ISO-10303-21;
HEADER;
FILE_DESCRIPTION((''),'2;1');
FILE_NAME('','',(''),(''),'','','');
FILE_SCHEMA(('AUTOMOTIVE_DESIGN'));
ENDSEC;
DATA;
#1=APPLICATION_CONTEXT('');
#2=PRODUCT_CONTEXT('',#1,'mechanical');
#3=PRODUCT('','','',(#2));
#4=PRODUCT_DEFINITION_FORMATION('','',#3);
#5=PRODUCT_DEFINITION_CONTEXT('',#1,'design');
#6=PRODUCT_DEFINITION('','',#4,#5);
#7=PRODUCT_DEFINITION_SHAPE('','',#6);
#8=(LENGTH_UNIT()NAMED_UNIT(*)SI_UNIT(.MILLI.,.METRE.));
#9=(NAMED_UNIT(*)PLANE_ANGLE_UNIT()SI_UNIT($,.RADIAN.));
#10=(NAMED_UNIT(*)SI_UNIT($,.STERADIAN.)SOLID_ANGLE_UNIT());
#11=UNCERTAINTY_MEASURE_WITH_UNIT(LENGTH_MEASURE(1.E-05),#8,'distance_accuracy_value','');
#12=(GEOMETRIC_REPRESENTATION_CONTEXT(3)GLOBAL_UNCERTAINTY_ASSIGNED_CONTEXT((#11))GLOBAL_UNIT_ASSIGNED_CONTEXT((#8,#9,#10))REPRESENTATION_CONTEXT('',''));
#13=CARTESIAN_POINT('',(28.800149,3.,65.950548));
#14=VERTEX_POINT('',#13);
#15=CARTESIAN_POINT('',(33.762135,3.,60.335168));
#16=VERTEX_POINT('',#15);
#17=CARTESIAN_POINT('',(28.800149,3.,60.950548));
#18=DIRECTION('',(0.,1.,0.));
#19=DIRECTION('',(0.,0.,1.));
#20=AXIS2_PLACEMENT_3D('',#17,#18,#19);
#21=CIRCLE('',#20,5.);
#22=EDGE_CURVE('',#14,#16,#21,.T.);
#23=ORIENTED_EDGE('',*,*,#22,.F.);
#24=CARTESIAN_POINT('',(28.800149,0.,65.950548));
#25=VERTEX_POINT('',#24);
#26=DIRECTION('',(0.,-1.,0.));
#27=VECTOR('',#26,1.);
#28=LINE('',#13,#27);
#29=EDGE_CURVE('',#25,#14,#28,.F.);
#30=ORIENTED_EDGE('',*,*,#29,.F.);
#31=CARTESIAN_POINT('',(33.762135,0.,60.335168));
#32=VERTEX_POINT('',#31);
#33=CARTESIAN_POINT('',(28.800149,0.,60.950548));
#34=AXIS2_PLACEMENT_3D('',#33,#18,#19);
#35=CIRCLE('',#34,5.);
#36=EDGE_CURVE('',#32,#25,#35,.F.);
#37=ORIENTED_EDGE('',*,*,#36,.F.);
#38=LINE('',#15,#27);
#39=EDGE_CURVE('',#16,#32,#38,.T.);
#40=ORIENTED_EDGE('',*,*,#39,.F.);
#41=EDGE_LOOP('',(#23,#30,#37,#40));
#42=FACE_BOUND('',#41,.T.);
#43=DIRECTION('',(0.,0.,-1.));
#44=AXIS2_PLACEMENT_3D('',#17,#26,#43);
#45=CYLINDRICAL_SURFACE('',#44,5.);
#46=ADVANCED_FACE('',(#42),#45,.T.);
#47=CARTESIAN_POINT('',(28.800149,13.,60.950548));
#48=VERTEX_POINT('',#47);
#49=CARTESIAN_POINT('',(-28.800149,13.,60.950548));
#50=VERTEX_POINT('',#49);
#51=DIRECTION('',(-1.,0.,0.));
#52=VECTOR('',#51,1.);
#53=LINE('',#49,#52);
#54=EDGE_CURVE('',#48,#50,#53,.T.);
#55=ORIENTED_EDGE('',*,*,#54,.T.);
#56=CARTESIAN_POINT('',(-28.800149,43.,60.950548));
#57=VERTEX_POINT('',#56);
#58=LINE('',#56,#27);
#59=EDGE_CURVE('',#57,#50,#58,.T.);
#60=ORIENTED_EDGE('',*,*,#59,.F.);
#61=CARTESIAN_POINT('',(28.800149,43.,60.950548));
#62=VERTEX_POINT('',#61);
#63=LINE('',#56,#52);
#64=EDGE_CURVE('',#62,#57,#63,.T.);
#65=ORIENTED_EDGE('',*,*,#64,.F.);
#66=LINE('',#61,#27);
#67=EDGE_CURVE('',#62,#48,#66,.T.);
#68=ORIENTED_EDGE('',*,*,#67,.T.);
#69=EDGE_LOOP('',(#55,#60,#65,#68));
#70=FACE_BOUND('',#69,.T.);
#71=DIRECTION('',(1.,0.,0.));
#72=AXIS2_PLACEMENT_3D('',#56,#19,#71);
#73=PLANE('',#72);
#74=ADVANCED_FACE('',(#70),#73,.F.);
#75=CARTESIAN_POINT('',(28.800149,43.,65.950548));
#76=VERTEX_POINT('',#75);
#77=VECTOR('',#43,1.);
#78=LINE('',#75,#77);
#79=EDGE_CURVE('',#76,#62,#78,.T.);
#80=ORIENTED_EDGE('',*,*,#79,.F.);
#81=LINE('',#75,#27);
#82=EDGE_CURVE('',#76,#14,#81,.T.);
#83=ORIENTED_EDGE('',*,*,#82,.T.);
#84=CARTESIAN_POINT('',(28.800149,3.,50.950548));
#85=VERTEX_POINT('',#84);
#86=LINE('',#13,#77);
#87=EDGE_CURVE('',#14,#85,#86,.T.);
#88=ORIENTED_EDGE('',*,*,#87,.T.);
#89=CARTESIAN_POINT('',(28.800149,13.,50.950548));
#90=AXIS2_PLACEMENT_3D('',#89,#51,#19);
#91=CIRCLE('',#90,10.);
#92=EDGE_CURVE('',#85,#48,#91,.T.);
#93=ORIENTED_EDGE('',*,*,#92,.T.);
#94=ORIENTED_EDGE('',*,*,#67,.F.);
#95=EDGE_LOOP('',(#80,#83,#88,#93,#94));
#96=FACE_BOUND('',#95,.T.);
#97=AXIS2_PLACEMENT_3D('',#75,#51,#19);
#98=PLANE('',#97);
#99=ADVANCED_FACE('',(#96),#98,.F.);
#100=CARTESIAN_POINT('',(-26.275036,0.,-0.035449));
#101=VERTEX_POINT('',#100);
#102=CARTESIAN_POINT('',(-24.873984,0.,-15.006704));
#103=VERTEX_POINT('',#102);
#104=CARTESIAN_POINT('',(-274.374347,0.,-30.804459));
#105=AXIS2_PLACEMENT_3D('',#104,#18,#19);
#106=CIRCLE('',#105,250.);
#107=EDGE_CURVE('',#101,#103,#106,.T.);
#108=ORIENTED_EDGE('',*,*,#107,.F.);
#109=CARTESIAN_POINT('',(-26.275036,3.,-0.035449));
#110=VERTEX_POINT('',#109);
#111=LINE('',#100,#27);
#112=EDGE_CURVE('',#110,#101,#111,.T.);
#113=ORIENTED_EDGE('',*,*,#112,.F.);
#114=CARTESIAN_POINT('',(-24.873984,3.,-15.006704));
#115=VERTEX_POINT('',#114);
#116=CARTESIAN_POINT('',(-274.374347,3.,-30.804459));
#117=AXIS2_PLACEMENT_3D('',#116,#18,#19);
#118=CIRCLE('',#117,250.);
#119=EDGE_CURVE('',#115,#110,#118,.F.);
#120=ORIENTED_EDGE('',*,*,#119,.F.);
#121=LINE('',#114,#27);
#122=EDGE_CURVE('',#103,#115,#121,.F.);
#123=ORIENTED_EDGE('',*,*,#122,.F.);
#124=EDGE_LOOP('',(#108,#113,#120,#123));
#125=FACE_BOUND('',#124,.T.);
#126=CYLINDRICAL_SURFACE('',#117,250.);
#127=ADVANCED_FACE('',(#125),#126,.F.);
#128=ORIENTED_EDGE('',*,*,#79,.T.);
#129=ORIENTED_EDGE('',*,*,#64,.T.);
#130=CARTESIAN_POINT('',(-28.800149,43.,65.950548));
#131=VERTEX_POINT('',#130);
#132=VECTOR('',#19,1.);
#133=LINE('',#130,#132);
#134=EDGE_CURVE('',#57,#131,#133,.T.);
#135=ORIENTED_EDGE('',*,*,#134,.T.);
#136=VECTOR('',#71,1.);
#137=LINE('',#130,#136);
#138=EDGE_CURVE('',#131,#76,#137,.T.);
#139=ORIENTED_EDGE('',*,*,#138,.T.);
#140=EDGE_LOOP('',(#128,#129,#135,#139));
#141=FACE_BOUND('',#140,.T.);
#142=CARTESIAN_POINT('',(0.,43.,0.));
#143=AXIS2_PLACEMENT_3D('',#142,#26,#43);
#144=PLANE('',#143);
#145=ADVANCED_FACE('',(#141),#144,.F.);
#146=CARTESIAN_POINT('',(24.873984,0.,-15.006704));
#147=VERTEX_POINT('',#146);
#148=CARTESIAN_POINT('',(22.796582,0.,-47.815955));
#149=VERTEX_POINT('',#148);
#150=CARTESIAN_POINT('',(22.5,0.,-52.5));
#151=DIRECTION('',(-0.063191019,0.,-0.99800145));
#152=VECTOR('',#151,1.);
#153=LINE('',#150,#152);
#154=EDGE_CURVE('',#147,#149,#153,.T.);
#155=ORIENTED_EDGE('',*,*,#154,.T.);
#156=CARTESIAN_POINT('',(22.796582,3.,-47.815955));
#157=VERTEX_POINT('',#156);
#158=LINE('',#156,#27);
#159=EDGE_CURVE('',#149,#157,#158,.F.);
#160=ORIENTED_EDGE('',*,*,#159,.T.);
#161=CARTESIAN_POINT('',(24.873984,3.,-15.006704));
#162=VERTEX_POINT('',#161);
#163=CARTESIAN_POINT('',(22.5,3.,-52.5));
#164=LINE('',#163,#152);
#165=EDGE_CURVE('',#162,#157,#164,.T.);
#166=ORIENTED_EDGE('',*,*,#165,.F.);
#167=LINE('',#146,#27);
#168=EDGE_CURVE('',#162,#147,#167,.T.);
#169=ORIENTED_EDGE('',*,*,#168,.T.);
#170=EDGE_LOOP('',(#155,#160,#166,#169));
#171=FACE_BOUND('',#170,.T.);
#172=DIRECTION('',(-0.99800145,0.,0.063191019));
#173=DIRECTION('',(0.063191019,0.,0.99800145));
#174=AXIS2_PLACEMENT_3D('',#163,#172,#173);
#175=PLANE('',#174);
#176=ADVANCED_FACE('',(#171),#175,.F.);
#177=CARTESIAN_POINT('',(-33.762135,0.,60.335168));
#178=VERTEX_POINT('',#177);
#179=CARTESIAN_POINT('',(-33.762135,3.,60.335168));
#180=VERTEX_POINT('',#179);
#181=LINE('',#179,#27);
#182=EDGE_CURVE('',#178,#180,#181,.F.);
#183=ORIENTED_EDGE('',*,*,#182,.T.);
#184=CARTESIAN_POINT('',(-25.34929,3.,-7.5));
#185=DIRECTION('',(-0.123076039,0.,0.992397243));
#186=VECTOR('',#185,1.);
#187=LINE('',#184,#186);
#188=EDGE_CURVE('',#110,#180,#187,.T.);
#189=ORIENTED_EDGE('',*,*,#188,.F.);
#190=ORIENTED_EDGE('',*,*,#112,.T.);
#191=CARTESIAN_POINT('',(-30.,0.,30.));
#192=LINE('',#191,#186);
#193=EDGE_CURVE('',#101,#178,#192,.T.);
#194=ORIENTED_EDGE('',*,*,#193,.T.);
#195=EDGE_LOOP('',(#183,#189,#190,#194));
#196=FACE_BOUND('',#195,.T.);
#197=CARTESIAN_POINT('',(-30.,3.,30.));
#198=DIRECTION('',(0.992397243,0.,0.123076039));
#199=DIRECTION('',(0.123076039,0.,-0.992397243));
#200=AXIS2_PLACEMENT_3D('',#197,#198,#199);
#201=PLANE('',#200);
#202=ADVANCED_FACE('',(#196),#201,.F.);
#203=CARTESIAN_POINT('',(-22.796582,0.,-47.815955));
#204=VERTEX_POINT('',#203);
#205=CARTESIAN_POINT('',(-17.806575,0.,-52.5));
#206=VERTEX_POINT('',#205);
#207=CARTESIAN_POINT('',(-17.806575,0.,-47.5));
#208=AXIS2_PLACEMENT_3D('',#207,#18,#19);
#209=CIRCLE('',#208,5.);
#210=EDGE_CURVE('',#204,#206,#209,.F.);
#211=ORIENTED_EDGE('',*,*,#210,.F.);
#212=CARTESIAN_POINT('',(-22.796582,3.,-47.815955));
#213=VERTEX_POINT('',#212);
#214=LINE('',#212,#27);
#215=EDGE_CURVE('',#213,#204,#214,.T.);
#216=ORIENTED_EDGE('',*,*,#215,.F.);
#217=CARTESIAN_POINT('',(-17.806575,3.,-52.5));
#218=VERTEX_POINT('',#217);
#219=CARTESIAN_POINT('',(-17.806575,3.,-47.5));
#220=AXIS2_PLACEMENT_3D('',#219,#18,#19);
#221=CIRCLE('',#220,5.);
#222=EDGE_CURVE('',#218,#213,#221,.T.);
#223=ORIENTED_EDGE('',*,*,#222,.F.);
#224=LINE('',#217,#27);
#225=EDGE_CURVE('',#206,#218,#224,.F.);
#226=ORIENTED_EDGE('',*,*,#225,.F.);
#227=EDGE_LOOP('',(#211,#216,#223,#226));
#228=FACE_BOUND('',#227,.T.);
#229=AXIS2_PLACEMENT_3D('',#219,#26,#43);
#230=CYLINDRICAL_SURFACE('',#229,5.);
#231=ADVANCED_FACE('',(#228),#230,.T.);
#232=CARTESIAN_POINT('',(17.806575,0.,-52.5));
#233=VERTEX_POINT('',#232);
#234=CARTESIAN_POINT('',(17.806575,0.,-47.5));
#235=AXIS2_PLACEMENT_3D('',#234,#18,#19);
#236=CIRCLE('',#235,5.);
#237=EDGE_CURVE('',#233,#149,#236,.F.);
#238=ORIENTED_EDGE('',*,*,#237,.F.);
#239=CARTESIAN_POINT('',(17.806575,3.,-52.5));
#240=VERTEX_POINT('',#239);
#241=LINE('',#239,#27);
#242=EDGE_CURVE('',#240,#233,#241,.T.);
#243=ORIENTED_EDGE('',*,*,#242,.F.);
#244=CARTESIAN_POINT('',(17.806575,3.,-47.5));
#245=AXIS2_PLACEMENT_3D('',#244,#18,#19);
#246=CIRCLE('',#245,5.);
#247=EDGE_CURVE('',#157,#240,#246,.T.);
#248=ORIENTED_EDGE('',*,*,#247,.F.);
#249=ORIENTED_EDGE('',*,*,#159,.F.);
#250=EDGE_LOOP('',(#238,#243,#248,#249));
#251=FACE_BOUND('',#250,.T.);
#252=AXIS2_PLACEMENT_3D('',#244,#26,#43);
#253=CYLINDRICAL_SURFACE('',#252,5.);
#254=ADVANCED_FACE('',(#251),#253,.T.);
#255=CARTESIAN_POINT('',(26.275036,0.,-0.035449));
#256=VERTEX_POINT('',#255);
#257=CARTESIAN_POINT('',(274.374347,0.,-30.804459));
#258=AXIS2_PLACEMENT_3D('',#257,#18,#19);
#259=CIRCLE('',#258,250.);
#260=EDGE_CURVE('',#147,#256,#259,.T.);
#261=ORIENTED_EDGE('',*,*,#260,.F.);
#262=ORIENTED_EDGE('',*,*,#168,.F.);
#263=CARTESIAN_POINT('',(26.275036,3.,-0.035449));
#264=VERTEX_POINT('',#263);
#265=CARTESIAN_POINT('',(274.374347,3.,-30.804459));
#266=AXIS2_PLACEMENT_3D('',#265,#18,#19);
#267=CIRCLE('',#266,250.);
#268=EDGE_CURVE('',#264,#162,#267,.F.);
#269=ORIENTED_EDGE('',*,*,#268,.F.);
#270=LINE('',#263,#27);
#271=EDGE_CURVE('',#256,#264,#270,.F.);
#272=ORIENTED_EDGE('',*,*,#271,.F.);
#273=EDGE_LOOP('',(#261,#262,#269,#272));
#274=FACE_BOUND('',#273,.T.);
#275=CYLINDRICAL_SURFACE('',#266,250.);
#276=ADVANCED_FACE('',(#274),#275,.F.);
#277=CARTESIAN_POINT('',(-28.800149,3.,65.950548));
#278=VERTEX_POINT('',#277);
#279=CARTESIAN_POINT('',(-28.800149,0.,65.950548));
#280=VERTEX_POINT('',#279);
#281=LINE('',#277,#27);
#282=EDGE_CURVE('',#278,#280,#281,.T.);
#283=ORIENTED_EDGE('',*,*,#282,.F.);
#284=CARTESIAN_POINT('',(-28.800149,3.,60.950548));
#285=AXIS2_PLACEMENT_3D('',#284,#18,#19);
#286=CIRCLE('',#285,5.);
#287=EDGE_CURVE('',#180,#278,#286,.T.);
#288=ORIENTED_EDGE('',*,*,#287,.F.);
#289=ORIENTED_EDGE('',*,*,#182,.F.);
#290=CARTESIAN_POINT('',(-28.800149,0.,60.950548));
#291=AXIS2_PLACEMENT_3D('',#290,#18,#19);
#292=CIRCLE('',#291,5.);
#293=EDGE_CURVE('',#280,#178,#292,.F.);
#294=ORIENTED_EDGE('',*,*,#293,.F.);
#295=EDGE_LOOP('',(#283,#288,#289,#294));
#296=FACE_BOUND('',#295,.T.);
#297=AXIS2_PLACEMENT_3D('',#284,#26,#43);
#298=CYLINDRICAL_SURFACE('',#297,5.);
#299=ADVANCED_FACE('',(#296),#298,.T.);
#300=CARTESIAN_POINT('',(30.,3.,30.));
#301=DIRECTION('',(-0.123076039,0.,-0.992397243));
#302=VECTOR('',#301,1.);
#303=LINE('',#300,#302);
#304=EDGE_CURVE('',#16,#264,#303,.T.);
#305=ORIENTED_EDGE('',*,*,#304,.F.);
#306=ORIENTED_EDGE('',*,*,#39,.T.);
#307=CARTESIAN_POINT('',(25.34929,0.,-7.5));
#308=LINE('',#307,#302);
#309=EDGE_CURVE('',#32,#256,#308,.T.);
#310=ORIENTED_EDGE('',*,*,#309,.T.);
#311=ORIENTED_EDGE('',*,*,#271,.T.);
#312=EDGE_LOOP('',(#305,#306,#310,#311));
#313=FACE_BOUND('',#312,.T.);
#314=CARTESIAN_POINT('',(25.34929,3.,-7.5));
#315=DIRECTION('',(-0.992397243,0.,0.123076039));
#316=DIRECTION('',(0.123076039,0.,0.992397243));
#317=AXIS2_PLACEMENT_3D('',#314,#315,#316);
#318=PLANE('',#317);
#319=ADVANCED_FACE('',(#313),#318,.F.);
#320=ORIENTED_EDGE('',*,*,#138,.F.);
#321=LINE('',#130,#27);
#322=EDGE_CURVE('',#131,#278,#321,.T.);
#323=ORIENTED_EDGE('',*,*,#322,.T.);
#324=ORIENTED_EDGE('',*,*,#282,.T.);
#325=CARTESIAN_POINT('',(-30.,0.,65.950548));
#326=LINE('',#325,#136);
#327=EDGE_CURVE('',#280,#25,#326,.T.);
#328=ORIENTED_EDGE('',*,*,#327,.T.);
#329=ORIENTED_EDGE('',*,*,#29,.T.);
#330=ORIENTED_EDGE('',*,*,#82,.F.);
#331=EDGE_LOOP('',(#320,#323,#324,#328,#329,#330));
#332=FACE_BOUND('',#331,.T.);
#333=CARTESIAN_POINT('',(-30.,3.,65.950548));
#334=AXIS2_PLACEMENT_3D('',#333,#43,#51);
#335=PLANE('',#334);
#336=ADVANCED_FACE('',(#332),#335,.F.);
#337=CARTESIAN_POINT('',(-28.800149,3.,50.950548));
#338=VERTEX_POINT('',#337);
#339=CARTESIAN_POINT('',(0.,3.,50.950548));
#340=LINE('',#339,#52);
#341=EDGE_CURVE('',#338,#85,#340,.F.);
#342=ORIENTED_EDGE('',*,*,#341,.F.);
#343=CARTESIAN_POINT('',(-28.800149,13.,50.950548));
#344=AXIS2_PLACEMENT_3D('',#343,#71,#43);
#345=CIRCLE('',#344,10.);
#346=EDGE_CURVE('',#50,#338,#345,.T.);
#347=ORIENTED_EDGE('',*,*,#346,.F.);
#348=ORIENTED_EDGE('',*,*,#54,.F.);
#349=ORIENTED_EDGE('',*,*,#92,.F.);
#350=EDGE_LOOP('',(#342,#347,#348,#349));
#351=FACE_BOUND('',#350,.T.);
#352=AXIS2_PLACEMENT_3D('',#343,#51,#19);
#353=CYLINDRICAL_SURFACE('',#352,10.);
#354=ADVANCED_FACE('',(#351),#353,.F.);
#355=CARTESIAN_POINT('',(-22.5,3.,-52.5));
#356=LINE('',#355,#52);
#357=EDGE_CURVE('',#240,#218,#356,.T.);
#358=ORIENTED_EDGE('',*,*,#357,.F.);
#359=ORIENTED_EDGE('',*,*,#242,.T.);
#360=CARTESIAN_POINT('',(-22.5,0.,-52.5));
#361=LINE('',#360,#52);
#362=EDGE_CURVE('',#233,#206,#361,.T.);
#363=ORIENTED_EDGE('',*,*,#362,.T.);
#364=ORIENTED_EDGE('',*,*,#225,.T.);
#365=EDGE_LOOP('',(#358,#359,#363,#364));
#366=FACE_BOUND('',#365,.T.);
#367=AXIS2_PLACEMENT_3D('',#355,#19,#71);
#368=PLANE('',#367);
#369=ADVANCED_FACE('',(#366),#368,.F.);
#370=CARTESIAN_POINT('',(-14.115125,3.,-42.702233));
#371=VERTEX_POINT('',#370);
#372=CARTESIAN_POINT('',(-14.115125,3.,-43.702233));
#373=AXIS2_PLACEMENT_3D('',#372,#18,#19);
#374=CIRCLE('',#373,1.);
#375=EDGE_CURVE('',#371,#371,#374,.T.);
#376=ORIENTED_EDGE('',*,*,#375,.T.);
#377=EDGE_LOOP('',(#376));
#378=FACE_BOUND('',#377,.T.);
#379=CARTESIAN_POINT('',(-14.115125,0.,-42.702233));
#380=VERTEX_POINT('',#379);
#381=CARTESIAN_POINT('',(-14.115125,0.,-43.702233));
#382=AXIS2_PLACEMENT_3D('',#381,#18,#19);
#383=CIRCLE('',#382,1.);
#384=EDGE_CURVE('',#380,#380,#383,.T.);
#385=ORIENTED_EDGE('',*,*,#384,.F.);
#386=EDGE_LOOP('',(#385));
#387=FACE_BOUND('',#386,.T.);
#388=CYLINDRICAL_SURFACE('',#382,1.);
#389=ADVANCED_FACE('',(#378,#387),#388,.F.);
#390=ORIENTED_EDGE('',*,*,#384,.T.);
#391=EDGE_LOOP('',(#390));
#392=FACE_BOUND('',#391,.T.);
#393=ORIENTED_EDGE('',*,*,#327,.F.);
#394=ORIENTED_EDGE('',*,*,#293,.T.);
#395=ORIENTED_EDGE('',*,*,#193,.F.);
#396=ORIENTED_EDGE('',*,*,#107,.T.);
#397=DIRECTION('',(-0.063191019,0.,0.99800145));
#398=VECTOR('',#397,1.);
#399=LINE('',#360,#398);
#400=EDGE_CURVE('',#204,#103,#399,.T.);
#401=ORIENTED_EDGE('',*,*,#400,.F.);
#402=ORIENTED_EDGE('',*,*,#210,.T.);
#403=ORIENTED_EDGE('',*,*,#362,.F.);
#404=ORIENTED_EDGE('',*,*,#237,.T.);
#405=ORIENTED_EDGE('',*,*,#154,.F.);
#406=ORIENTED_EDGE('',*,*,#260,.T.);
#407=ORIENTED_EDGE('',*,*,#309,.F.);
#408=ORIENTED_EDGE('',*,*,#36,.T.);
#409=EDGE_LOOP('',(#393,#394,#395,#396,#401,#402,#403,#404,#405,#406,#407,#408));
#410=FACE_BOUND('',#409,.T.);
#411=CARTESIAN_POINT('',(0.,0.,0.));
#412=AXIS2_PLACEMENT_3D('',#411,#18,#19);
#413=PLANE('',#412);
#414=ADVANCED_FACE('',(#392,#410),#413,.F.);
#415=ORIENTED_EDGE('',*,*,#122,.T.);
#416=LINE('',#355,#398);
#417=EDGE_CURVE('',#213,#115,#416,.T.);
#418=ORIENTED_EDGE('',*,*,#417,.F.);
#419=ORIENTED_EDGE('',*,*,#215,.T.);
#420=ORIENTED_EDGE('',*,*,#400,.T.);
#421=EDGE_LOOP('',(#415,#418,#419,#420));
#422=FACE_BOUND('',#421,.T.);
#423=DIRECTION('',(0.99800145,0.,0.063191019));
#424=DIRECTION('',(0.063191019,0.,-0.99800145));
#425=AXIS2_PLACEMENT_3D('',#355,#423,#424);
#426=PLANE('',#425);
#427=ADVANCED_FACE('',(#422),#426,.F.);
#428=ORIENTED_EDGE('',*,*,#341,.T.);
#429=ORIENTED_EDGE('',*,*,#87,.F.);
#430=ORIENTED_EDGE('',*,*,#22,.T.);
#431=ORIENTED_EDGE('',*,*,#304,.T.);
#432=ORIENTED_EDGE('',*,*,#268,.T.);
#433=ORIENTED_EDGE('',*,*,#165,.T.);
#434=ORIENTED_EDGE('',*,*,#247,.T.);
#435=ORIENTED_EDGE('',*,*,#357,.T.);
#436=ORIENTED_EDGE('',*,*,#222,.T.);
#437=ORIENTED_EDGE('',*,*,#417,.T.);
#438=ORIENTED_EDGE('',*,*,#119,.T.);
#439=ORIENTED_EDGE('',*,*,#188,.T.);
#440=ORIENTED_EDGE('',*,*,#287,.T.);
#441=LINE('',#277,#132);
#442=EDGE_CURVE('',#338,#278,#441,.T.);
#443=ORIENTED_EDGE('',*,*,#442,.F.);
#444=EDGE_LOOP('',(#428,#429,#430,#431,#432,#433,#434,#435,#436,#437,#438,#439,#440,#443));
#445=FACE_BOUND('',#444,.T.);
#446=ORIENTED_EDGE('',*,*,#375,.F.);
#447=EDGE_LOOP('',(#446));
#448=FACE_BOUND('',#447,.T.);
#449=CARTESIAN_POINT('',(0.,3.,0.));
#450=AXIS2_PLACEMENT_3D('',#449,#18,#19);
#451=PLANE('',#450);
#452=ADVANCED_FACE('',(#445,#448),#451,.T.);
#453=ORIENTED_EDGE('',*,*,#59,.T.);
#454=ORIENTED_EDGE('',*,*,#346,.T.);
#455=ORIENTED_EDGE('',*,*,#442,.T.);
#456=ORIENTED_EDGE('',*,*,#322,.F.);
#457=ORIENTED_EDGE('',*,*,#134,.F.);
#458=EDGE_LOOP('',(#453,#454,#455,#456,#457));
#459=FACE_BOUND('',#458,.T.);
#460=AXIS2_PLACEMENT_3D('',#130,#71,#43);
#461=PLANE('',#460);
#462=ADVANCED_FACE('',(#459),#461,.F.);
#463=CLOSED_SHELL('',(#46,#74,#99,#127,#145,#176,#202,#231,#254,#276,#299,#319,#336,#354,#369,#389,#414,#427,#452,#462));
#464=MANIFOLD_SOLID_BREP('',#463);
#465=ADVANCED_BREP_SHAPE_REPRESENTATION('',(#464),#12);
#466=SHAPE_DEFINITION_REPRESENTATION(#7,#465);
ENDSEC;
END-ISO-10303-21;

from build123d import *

# Parameters (mm, degrees)
BOSS_EXTRUDE1_DEPTH = 3
FILLET1_R           = 250
FILLET2_R           = 5
SKETCH2_R           = 1
CUT_EXTRUDE1_DEPTH  = 3
SKETCH3_W           = 57.60029736
SKETCH3_H           = 5
BOSS_EXTRUDE2_DEPTH = 40
FILLET3_R           = 10


with BuildPart() as part:
    # Sketch1 → Boss-Extrude1 (new body)
    with BuildSketch(Plane(origin=(0, 0, 0), x_dir=(1, 0, 0), z_dir=(0, 1, 0))):
        Polygon((-22.5, 52.5), (22.5, 52.5), (25.349290321, 7.5), (30, -30), (34.417386739, -65.618650519), (30, -65.950548022), (-30, -65.950548022), (-34.417386739, -65.618650519), (-30, -30), (-25.349290321, 7.5), align=None)
    extrude(amount=BOSS_EXTRUDE1_DEPTH)

    # Fillet1
    # the kernel refuses this fillet: 250 mm, written as the material it adds along each edge
    with BuildSketch(Plane(origin=(-25.349290321, 0, -7.5), x_dir=(-0.12307603906737652, 0, 0.9923972433493987), z_dir=(0, 1, 0))) as fillet1_piece_1:
        with BuildLine():
            CenterArc((FILLET1_R * 0.0300869468275, -FILLET1_R), FILLET1_R, 90, 3.446670391)
            Line((-FILLET1_R * 0.0300325252162, -FILLET1_R * 0.00180881135867), (0, 0))
            Line((0, 0), (FILLET1_R * 0.0300869468274, 0))
        make_face()
    extrude(amount=3)
    with BuildSketch(Plane(origin=(25.349290321, 0, -7.5), x_dir=(0.12307603906732778, 0, 0.9923972433494047), z_dir=(0, 1, 0))) as fillet1_piece_2:
        with BuildLine():
            CenterArc((FILLET1_R * 0.0300869468274, FILLET1_R), FILLET1_R, 266.553329609, 3.446670391)
            Line((-FILLET1_R * 0.0300325252162, FILLET1_R * 0.00180881135867), (0, 0))
            Line((0, 0), (FILLET1_R * 0.0300869468274, 0))
        make_face()
    extrude(amount=3)

    # Fillet2
    fillet2_edges = [part.edges().sort_by_distance(p)[0] for p in [
        (-22.5, 1.5, -52.5),
        (-34.417386739, 1.5, 65.618650519),
        (34.417386739, 1.5, 65.618650519),
        (22.5, 1.5, -52.5),
    ]]
    fillet(fillet2_edges, radius=FILLET2_R)

    # Sketch2 → Cut-Extrude1 (cut)
    with BuildSketch(Plane(origin=(0, 3, 0), x_dir=(1, 0, 0), z_dir=(0, 1, 0))):
        with Locations(Location((-14.115125166, 43.702233324, 0), (0, 0, 270))):
            Circle(SKETCH2_R)
    extrude(amount=-CUT_EXTRUDE1_DEPTH, mode=Mode.SUBTRACT)

    # Sketch3 → Boss-Extrude2 (add)
    with BuildSketch(Plane(origin=(0, 3, 0), x_dir=(1, 0, 0), z_dir=(0, 1, 0))):
        with Locations((0, -63.450548022)):
            Rectangle(SKETCH3_W, SKETCH3_H)
    extrude(amount=BOSS_EXTRUDE2_DEPTH)

    # Fillet3
    fillet3_edges = [part.edges().sort_by_distance(p)[0] for p in [
        (0, 3, 60.950548022),
    ]]
    fillet(fillet3_edges, radius=FILLET3_R)


solid = part.part
